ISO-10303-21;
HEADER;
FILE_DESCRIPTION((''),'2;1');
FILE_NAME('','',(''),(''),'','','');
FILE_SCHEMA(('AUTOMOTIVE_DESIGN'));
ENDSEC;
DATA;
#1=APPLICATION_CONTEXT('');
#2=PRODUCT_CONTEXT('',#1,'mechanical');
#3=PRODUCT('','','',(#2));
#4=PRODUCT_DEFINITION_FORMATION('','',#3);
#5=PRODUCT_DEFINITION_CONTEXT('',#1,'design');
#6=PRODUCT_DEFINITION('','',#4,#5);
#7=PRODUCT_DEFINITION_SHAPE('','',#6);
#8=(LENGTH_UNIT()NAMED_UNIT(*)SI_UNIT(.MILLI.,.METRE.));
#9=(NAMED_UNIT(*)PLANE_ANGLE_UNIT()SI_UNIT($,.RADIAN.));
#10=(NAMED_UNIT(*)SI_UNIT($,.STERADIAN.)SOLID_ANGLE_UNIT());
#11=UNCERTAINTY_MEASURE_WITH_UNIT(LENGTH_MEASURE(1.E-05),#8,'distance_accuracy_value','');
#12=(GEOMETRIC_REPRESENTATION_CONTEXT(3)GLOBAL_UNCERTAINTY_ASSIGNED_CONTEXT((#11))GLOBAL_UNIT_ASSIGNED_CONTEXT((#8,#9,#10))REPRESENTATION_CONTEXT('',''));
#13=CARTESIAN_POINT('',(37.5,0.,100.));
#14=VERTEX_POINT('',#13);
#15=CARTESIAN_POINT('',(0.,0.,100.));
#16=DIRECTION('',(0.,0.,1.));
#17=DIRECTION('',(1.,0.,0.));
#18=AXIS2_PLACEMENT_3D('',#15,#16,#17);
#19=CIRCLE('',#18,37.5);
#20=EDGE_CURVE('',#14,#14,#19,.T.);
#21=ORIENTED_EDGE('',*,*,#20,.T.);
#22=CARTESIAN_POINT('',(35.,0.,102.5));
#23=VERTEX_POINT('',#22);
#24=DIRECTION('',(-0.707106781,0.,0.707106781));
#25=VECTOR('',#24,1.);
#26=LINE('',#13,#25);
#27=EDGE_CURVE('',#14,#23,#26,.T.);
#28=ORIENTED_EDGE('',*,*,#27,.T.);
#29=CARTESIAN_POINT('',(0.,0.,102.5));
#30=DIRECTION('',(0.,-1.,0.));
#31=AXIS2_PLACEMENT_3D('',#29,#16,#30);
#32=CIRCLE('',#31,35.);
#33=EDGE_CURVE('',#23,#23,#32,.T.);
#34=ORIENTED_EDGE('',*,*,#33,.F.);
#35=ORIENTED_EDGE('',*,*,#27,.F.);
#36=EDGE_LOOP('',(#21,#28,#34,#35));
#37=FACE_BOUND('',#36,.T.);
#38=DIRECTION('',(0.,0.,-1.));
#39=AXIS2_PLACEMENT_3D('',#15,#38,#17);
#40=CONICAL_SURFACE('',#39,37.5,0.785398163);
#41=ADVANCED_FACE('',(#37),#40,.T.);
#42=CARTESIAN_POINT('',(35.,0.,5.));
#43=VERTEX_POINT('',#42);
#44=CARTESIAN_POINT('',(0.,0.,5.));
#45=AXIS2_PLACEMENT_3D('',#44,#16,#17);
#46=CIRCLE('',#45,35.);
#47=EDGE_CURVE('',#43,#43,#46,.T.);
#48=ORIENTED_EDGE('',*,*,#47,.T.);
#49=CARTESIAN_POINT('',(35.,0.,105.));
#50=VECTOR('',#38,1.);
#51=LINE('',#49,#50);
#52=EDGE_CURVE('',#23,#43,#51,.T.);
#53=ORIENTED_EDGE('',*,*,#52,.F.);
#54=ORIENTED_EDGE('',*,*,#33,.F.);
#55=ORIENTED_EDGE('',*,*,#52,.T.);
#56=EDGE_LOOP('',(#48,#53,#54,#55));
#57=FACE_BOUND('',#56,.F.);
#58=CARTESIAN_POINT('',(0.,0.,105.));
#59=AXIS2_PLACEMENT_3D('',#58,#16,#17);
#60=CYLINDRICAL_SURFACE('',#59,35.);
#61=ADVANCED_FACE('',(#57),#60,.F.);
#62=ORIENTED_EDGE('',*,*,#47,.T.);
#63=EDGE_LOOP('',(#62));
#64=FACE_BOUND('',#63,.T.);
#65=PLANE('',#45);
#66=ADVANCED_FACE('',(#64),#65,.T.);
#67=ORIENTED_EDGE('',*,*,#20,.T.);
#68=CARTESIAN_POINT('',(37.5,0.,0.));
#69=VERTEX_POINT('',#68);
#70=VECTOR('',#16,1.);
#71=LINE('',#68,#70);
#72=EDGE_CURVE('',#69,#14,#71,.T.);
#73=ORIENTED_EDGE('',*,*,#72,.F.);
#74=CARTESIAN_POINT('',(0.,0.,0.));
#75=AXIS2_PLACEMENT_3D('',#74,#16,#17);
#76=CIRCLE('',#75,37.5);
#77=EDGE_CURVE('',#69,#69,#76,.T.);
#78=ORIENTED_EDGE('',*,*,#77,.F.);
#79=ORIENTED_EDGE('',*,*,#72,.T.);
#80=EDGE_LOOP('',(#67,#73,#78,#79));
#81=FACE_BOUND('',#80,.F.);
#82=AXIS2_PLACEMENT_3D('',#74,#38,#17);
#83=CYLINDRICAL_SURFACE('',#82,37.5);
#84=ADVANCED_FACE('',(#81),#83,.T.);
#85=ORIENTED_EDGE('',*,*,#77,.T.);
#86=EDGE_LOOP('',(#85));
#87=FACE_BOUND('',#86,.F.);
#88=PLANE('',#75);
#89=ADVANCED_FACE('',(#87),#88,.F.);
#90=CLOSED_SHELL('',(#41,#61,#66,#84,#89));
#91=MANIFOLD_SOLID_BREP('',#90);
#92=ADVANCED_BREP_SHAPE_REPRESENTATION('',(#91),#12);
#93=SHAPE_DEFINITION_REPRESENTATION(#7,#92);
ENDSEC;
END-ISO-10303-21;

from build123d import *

# Parameters (mm, degrees)
F0_R     = 37.5
F1_DEPTH = 105
F2_R     = 35
F3_DEPTH = 100


# Not quite as in the source:
# - a fillet or chamfer that OpenCascade refuses, or shapes differently, is made with other operations: its cross-section is extruded or revolved along the edge and cut away or added


with BuildPart() as f1:
    # F0 (on Top) → F1 (new body)
    with BuildSketch(Plane.XY):
        Circle(F0_R)
    extrude(amount=F1_DEPTH)

    # F2 (on face) → F3 (cut)
    with BuildSketch(Plane.XY.offset(105)):
        Circle(F2_R)
    extrude(amount=-F3_DEPTH, mode=Mode.SUBTRACT)

    # F4: chamfer of 5 on 1 edges, made by hand

    # F4_s1 → F4_t2 (revolve, cut)
    with BuildSketch(Plane.XZ):
        Polygon((37.5, 100), (32.5, 105), (37.5, 105), align=None)
    revolve(axis=Axis((0, 0, 105), (0, 0, 1)), mode=Mode.SUBTRACT)


solid = f1.part
